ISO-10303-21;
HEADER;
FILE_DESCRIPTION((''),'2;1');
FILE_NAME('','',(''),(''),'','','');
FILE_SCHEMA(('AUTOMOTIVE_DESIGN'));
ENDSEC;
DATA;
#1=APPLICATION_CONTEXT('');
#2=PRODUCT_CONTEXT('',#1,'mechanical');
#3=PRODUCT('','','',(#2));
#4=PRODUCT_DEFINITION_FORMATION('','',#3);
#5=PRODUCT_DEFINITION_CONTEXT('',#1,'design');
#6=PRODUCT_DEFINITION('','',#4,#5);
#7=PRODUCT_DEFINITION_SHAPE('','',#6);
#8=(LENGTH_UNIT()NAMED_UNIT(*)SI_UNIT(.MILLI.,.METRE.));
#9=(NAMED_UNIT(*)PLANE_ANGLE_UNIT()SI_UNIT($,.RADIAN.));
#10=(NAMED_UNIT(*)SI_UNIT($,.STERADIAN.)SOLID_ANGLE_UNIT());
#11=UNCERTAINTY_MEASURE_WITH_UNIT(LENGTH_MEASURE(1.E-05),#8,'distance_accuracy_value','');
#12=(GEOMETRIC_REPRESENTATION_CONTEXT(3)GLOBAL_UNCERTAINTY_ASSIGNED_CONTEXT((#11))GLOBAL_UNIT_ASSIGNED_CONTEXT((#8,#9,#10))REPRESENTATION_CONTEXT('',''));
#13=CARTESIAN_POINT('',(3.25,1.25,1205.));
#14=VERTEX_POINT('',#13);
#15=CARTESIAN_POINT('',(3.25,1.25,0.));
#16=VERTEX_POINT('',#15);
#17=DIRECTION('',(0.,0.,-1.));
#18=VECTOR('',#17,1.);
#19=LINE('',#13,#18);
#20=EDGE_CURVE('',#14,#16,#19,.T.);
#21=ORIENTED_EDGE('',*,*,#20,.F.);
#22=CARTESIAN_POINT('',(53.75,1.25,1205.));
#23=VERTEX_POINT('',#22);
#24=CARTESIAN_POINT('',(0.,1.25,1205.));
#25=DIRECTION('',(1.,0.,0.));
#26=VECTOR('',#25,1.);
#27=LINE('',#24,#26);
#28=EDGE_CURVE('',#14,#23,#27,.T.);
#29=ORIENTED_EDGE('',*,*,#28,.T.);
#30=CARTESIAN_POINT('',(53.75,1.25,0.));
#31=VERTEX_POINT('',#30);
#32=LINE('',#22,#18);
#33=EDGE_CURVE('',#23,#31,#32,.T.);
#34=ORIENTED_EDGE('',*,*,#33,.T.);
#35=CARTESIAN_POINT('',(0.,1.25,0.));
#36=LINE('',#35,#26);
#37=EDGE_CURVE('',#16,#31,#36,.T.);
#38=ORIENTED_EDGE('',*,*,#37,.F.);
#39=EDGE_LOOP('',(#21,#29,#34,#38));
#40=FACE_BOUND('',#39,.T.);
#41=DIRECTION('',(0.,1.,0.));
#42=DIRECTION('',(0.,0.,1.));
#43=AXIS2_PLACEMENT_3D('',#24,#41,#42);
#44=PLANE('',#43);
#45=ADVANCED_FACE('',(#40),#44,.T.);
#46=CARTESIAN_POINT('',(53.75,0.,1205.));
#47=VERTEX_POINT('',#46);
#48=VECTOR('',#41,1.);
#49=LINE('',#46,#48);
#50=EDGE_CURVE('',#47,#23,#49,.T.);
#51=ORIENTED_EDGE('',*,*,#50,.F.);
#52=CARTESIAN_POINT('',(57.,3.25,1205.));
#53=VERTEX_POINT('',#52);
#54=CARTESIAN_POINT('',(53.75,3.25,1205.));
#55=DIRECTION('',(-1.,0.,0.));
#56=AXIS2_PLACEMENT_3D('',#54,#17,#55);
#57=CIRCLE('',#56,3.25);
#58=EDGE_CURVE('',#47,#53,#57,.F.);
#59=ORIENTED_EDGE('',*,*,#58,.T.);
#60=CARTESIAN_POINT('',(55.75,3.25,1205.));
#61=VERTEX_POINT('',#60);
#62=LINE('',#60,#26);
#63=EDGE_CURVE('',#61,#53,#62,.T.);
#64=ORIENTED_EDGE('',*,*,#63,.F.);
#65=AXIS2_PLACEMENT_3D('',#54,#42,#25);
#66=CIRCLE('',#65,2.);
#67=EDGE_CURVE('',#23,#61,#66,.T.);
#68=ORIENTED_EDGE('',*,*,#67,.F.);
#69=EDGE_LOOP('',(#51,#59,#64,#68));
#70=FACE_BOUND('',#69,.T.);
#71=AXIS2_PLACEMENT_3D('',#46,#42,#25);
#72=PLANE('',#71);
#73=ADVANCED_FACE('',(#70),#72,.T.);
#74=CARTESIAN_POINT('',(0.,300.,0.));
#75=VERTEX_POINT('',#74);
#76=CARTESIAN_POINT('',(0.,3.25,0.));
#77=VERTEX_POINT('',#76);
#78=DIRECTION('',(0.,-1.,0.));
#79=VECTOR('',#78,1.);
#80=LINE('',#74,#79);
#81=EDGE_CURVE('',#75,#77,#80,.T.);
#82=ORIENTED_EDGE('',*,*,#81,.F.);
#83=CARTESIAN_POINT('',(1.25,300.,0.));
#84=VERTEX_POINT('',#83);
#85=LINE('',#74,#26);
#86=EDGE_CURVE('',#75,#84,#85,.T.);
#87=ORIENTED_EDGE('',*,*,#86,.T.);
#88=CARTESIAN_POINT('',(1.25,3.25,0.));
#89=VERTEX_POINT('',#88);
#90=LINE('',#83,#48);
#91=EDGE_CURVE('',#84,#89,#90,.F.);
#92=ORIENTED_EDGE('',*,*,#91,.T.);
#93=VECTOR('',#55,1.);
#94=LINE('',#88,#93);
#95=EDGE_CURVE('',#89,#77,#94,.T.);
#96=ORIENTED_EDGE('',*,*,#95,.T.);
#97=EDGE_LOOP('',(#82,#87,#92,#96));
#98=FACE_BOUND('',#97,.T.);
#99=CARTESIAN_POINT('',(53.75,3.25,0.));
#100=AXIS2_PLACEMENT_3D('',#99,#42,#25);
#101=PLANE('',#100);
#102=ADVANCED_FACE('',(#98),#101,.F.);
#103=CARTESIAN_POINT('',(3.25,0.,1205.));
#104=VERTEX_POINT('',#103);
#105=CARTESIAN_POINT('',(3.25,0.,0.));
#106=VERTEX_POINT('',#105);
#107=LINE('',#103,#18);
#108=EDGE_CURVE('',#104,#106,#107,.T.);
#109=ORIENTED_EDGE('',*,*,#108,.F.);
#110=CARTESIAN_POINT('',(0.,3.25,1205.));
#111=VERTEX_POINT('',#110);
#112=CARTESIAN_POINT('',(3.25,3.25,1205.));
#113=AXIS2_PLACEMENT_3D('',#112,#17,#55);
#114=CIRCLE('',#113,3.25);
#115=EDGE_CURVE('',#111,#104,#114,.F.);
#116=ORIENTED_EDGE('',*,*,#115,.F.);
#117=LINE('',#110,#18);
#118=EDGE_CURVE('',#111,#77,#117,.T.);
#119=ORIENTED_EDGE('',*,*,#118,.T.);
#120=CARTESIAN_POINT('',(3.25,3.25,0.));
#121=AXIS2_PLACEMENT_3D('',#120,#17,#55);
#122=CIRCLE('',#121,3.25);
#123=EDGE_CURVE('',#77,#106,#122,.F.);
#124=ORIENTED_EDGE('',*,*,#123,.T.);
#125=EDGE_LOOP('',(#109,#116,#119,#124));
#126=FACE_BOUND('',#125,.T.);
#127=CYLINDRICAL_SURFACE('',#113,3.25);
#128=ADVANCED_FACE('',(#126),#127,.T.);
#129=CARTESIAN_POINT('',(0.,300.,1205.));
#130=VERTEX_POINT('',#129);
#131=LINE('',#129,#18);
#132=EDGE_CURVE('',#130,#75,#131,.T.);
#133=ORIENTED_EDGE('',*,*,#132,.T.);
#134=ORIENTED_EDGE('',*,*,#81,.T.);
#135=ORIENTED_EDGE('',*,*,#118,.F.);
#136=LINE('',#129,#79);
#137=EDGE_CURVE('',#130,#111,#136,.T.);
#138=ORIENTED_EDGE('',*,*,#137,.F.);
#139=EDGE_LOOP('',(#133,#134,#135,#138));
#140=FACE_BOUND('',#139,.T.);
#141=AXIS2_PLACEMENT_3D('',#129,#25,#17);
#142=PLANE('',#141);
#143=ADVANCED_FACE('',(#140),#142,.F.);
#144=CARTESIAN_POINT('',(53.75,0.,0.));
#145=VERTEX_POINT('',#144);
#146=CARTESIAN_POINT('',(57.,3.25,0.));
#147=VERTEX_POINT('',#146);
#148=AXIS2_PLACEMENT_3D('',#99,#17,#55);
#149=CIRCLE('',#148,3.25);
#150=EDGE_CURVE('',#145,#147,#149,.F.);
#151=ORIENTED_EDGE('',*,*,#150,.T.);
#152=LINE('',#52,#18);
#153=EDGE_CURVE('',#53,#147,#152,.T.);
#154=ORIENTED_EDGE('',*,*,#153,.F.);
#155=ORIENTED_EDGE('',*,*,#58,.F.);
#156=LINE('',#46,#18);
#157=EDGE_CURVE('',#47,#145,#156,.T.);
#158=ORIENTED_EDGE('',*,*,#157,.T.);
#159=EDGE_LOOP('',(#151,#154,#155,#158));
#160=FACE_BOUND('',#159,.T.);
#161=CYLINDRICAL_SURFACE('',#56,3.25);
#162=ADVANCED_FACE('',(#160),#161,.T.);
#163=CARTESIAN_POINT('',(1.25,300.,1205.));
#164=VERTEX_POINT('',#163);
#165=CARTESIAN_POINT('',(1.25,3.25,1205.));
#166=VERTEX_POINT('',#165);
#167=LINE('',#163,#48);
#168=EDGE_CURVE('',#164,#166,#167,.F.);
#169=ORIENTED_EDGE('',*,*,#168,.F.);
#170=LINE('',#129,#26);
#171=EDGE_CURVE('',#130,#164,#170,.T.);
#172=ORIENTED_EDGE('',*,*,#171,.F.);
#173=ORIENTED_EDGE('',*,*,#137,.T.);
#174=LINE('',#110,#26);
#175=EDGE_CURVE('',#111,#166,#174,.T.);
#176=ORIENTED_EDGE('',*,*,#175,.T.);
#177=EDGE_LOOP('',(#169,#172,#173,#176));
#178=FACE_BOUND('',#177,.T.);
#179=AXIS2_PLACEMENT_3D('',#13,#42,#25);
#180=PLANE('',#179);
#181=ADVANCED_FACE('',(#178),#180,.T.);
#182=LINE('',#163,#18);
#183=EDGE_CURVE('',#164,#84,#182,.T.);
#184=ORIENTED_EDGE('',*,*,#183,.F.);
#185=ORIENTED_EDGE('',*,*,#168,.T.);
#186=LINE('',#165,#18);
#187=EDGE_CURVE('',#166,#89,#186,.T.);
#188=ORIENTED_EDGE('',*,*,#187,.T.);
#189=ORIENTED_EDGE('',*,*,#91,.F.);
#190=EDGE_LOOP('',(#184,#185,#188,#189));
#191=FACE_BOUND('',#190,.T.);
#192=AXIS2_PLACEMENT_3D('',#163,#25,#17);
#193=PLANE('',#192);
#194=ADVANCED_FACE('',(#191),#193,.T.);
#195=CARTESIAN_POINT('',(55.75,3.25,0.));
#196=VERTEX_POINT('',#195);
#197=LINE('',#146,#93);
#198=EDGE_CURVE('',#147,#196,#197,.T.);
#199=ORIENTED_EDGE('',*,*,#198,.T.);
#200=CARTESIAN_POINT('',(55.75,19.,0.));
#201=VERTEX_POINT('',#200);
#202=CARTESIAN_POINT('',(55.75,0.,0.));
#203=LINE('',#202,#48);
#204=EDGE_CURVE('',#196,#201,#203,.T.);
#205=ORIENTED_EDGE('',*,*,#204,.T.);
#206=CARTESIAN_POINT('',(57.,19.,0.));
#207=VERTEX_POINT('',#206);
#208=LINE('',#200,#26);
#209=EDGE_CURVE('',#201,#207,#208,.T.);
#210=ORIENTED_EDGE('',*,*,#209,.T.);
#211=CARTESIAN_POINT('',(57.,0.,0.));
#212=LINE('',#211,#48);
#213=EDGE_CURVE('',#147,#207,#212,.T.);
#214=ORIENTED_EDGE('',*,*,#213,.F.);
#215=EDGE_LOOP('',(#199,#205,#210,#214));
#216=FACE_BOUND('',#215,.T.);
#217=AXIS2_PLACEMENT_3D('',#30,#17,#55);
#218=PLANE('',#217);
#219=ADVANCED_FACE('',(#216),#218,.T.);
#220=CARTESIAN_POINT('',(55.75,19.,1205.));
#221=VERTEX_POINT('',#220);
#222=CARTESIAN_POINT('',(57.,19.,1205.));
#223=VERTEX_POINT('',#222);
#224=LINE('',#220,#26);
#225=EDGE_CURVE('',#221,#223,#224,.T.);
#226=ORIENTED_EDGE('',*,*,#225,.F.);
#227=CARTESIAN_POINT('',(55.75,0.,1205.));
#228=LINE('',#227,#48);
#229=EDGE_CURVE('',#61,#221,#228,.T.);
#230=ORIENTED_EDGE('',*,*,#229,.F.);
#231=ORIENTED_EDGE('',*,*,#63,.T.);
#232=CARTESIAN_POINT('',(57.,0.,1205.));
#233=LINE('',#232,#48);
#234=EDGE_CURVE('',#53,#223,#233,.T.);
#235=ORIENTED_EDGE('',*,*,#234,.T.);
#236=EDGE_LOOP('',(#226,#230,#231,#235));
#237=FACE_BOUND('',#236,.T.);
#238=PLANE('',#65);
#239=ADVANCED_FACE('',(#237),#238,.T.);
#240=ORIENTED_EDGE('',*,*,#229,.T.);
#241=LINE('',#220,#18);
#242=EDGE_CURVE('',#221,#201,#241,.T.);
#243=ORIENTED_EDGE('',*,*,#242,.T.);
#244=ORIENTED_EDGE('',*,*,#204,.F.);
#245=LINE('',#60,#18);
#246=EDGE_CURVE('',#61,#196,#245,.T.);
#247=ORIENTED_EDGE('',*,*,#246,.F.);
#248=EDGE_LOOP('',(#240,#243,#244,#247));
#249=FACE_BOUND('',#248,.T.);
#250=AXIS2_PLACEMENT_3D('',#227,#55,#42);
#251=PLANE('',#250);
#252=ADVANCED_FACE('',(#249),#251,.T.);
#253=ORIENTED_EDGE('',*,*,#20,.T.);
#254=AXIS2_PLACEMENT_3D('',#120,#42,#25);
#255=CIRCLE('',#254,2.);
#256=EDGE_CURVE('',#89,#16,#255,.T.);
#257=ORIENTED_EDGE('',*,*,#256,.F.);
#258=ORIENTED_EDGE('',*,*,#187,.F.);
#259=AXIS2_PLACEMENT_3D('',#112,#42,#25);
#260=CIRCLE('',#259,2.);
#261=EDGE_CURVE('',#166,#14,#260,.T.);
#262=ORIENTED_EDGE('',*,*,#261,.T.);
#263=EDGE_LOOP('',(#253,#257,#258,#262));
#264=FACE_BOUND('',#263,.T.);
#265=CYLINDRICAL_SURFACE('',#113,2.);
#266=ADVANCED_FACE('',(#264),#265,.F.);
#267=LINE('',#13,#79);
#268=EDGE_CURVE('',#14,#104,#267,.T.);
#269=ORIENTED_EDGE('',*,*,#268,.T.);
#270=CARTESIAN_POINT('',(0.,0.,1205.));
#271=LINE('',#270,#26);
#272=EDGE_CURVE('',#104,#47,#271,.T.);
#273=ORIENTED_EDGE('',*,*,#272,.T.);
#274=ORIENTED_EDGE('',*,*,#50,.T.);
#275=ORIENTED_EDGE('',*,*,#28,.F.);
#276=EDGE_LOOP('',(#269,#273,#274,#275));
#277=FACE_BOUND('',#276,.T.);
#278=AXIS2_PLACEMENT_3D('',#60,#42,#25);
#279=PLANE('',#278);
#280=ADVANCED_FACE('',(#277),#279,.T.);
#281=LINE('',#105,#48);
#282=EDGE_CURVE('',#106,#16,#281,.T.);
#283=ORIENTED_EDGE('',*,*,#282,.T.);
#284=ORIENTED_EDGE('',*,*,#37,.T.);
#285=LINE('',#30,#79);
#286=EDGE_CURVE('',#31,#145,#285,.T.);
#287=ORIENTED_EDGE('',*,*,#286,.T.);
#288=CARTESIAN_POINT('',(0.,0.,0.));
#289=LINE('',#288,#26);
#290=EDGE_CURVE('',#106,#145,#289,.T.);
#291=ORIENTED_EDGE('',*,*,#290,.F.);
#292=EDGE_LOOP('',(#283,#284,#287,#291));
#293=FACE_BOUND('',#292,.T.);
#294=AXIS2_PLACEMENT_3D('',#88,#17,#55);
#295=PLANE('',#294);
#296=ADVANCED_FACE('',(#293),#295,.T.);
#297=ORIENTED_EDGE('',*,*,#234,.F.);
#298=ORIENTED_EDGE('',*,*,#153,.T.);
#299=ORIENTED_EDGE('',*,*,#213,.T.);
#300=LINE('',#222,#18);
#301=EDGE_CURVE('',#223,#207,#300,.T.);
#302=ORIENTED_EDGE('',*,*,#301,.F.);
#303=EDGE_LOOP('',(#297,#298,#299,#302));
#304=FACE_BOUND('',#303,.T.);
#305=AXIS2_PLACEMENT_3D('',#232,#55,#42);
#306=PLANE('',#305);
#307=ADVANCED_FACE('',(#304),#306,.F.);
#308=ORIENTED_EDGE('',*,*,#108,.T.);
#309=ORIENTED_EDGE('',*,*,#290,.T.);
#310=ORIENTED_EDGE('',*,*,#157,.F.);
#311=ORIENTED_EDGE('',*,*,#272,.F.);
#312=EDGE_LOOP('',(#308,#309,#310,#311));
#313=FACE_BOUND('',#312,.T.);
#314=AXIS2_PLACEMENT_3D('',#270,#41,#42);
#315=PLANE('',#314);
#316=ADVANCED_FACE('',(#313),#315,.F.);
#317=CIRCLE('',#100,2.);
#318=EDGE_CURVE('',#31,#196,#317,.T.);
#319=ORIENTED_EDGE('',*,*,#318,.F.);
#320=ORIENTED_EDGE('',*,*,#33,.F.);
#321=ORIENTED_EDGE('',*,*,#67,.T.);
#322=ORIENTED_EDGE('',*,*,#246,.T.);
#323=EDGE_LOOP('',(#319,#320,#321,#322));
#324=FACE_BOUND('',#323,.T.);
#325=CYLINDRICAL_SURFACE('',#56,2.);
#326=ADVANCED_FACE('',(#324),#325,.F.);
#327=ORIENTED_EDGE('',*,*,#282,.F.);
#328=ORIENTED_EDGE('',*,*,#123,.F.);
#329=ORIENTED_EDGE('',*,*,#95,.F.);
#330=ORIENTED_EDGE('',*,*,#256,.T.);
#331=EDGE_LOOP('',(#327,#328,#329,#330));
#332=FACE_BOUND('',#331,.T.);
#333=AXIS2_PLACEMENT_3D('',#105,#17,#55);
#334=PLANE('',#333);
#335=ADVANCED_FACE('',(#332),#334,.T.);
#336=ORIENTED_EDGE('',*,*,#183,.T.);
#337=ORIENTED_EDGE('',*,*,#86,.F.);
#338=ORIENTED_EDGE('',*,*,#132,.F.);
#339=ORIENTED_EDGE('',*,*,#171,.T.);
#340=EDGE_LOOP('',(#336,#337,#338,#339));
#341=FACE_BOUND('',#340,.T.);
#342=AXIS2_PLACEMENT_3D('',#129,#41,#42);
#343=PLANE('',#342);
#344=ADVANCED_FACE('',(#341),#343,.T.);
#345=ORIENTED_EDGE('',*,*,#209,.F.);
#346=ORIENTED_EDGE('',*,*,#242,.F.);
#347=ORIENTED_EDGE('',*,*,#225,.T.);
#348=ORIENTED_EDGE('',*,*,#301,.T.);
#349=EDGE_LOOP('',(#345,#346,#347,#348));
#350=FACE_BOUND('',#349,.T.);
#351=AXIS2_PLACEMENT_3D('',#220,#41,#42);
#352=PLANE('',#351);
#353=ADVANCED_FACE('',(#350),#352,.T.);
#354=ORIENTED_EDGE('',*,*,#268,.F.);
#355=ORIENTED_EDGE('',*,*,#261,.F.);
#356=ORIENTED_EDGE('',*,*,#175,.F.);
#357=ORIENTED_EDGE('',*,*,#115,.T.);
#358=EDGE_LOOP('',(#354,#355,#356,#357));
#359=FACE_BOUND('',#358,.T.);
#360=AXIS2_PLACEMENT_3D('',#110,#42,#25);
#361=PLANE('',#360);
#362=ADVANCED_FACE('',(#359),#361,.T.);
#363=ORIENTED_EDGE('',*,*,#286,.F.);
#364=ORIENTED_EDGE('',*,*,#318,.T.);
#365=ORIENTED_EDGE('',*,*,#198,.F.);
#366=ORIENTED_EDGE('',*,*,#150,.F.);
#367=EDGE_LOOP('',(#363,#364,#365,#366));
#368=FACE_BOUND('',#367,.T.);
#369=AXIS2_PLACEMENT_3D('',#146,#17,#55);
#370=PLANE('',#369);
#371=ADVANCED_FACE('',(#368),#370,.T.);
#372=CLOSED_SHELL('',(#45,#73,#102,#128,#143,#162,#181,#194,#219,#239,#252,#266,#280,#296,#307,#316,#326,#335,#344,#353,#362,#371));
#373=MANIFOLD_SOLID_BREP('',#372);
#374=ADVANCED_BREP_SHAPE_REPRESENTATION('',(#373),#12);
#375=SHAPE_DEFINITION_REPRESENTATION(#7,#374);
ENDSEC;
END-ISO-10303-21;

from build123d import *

# Parameters (mm, degrees)
BASE_FLANGE1_DEPTH = 1205


# Sheet-metal steps are written as plain solids
with BuildPart() as part:
    # Sketch1 → Base-Flange1 (new body)
    with BuildSketch(Plane.XY):
        with BuildLine():
            Line((0, 300), (0, 3.25))
            ThreePointArc((0, 3.25), (0.951902961, 0.951902961), (3.25, 0))
            Line((3.25, 0), (53.75, 0))
            ThreePointArc((53.75, 0), (56.048097039, 0.951902961), (57, 3.25))
            Line((57, 3.25), (57, 19))
            Line((57, 19), (55.75, 19))
            Line((55.75, 19), (55.75, 3.25))
            ThreePointArc((55.75, 3.25), (55.164213562, 1.835786438), (53.75, 1.25))
            Line((53.75, 1.25), (3.25, 1.25))
            ThreePointArc((3.25, 1.25), (1.835786438, 1.835786438), (1.25, 3.25))
            Line((1.25, 3.25), (1.25, 300))
            Line((1.25, 300), (0, 300))
        make_face()
    extrude(amount=BASE_FLANGE1_DEPTH)


solid = part.part
